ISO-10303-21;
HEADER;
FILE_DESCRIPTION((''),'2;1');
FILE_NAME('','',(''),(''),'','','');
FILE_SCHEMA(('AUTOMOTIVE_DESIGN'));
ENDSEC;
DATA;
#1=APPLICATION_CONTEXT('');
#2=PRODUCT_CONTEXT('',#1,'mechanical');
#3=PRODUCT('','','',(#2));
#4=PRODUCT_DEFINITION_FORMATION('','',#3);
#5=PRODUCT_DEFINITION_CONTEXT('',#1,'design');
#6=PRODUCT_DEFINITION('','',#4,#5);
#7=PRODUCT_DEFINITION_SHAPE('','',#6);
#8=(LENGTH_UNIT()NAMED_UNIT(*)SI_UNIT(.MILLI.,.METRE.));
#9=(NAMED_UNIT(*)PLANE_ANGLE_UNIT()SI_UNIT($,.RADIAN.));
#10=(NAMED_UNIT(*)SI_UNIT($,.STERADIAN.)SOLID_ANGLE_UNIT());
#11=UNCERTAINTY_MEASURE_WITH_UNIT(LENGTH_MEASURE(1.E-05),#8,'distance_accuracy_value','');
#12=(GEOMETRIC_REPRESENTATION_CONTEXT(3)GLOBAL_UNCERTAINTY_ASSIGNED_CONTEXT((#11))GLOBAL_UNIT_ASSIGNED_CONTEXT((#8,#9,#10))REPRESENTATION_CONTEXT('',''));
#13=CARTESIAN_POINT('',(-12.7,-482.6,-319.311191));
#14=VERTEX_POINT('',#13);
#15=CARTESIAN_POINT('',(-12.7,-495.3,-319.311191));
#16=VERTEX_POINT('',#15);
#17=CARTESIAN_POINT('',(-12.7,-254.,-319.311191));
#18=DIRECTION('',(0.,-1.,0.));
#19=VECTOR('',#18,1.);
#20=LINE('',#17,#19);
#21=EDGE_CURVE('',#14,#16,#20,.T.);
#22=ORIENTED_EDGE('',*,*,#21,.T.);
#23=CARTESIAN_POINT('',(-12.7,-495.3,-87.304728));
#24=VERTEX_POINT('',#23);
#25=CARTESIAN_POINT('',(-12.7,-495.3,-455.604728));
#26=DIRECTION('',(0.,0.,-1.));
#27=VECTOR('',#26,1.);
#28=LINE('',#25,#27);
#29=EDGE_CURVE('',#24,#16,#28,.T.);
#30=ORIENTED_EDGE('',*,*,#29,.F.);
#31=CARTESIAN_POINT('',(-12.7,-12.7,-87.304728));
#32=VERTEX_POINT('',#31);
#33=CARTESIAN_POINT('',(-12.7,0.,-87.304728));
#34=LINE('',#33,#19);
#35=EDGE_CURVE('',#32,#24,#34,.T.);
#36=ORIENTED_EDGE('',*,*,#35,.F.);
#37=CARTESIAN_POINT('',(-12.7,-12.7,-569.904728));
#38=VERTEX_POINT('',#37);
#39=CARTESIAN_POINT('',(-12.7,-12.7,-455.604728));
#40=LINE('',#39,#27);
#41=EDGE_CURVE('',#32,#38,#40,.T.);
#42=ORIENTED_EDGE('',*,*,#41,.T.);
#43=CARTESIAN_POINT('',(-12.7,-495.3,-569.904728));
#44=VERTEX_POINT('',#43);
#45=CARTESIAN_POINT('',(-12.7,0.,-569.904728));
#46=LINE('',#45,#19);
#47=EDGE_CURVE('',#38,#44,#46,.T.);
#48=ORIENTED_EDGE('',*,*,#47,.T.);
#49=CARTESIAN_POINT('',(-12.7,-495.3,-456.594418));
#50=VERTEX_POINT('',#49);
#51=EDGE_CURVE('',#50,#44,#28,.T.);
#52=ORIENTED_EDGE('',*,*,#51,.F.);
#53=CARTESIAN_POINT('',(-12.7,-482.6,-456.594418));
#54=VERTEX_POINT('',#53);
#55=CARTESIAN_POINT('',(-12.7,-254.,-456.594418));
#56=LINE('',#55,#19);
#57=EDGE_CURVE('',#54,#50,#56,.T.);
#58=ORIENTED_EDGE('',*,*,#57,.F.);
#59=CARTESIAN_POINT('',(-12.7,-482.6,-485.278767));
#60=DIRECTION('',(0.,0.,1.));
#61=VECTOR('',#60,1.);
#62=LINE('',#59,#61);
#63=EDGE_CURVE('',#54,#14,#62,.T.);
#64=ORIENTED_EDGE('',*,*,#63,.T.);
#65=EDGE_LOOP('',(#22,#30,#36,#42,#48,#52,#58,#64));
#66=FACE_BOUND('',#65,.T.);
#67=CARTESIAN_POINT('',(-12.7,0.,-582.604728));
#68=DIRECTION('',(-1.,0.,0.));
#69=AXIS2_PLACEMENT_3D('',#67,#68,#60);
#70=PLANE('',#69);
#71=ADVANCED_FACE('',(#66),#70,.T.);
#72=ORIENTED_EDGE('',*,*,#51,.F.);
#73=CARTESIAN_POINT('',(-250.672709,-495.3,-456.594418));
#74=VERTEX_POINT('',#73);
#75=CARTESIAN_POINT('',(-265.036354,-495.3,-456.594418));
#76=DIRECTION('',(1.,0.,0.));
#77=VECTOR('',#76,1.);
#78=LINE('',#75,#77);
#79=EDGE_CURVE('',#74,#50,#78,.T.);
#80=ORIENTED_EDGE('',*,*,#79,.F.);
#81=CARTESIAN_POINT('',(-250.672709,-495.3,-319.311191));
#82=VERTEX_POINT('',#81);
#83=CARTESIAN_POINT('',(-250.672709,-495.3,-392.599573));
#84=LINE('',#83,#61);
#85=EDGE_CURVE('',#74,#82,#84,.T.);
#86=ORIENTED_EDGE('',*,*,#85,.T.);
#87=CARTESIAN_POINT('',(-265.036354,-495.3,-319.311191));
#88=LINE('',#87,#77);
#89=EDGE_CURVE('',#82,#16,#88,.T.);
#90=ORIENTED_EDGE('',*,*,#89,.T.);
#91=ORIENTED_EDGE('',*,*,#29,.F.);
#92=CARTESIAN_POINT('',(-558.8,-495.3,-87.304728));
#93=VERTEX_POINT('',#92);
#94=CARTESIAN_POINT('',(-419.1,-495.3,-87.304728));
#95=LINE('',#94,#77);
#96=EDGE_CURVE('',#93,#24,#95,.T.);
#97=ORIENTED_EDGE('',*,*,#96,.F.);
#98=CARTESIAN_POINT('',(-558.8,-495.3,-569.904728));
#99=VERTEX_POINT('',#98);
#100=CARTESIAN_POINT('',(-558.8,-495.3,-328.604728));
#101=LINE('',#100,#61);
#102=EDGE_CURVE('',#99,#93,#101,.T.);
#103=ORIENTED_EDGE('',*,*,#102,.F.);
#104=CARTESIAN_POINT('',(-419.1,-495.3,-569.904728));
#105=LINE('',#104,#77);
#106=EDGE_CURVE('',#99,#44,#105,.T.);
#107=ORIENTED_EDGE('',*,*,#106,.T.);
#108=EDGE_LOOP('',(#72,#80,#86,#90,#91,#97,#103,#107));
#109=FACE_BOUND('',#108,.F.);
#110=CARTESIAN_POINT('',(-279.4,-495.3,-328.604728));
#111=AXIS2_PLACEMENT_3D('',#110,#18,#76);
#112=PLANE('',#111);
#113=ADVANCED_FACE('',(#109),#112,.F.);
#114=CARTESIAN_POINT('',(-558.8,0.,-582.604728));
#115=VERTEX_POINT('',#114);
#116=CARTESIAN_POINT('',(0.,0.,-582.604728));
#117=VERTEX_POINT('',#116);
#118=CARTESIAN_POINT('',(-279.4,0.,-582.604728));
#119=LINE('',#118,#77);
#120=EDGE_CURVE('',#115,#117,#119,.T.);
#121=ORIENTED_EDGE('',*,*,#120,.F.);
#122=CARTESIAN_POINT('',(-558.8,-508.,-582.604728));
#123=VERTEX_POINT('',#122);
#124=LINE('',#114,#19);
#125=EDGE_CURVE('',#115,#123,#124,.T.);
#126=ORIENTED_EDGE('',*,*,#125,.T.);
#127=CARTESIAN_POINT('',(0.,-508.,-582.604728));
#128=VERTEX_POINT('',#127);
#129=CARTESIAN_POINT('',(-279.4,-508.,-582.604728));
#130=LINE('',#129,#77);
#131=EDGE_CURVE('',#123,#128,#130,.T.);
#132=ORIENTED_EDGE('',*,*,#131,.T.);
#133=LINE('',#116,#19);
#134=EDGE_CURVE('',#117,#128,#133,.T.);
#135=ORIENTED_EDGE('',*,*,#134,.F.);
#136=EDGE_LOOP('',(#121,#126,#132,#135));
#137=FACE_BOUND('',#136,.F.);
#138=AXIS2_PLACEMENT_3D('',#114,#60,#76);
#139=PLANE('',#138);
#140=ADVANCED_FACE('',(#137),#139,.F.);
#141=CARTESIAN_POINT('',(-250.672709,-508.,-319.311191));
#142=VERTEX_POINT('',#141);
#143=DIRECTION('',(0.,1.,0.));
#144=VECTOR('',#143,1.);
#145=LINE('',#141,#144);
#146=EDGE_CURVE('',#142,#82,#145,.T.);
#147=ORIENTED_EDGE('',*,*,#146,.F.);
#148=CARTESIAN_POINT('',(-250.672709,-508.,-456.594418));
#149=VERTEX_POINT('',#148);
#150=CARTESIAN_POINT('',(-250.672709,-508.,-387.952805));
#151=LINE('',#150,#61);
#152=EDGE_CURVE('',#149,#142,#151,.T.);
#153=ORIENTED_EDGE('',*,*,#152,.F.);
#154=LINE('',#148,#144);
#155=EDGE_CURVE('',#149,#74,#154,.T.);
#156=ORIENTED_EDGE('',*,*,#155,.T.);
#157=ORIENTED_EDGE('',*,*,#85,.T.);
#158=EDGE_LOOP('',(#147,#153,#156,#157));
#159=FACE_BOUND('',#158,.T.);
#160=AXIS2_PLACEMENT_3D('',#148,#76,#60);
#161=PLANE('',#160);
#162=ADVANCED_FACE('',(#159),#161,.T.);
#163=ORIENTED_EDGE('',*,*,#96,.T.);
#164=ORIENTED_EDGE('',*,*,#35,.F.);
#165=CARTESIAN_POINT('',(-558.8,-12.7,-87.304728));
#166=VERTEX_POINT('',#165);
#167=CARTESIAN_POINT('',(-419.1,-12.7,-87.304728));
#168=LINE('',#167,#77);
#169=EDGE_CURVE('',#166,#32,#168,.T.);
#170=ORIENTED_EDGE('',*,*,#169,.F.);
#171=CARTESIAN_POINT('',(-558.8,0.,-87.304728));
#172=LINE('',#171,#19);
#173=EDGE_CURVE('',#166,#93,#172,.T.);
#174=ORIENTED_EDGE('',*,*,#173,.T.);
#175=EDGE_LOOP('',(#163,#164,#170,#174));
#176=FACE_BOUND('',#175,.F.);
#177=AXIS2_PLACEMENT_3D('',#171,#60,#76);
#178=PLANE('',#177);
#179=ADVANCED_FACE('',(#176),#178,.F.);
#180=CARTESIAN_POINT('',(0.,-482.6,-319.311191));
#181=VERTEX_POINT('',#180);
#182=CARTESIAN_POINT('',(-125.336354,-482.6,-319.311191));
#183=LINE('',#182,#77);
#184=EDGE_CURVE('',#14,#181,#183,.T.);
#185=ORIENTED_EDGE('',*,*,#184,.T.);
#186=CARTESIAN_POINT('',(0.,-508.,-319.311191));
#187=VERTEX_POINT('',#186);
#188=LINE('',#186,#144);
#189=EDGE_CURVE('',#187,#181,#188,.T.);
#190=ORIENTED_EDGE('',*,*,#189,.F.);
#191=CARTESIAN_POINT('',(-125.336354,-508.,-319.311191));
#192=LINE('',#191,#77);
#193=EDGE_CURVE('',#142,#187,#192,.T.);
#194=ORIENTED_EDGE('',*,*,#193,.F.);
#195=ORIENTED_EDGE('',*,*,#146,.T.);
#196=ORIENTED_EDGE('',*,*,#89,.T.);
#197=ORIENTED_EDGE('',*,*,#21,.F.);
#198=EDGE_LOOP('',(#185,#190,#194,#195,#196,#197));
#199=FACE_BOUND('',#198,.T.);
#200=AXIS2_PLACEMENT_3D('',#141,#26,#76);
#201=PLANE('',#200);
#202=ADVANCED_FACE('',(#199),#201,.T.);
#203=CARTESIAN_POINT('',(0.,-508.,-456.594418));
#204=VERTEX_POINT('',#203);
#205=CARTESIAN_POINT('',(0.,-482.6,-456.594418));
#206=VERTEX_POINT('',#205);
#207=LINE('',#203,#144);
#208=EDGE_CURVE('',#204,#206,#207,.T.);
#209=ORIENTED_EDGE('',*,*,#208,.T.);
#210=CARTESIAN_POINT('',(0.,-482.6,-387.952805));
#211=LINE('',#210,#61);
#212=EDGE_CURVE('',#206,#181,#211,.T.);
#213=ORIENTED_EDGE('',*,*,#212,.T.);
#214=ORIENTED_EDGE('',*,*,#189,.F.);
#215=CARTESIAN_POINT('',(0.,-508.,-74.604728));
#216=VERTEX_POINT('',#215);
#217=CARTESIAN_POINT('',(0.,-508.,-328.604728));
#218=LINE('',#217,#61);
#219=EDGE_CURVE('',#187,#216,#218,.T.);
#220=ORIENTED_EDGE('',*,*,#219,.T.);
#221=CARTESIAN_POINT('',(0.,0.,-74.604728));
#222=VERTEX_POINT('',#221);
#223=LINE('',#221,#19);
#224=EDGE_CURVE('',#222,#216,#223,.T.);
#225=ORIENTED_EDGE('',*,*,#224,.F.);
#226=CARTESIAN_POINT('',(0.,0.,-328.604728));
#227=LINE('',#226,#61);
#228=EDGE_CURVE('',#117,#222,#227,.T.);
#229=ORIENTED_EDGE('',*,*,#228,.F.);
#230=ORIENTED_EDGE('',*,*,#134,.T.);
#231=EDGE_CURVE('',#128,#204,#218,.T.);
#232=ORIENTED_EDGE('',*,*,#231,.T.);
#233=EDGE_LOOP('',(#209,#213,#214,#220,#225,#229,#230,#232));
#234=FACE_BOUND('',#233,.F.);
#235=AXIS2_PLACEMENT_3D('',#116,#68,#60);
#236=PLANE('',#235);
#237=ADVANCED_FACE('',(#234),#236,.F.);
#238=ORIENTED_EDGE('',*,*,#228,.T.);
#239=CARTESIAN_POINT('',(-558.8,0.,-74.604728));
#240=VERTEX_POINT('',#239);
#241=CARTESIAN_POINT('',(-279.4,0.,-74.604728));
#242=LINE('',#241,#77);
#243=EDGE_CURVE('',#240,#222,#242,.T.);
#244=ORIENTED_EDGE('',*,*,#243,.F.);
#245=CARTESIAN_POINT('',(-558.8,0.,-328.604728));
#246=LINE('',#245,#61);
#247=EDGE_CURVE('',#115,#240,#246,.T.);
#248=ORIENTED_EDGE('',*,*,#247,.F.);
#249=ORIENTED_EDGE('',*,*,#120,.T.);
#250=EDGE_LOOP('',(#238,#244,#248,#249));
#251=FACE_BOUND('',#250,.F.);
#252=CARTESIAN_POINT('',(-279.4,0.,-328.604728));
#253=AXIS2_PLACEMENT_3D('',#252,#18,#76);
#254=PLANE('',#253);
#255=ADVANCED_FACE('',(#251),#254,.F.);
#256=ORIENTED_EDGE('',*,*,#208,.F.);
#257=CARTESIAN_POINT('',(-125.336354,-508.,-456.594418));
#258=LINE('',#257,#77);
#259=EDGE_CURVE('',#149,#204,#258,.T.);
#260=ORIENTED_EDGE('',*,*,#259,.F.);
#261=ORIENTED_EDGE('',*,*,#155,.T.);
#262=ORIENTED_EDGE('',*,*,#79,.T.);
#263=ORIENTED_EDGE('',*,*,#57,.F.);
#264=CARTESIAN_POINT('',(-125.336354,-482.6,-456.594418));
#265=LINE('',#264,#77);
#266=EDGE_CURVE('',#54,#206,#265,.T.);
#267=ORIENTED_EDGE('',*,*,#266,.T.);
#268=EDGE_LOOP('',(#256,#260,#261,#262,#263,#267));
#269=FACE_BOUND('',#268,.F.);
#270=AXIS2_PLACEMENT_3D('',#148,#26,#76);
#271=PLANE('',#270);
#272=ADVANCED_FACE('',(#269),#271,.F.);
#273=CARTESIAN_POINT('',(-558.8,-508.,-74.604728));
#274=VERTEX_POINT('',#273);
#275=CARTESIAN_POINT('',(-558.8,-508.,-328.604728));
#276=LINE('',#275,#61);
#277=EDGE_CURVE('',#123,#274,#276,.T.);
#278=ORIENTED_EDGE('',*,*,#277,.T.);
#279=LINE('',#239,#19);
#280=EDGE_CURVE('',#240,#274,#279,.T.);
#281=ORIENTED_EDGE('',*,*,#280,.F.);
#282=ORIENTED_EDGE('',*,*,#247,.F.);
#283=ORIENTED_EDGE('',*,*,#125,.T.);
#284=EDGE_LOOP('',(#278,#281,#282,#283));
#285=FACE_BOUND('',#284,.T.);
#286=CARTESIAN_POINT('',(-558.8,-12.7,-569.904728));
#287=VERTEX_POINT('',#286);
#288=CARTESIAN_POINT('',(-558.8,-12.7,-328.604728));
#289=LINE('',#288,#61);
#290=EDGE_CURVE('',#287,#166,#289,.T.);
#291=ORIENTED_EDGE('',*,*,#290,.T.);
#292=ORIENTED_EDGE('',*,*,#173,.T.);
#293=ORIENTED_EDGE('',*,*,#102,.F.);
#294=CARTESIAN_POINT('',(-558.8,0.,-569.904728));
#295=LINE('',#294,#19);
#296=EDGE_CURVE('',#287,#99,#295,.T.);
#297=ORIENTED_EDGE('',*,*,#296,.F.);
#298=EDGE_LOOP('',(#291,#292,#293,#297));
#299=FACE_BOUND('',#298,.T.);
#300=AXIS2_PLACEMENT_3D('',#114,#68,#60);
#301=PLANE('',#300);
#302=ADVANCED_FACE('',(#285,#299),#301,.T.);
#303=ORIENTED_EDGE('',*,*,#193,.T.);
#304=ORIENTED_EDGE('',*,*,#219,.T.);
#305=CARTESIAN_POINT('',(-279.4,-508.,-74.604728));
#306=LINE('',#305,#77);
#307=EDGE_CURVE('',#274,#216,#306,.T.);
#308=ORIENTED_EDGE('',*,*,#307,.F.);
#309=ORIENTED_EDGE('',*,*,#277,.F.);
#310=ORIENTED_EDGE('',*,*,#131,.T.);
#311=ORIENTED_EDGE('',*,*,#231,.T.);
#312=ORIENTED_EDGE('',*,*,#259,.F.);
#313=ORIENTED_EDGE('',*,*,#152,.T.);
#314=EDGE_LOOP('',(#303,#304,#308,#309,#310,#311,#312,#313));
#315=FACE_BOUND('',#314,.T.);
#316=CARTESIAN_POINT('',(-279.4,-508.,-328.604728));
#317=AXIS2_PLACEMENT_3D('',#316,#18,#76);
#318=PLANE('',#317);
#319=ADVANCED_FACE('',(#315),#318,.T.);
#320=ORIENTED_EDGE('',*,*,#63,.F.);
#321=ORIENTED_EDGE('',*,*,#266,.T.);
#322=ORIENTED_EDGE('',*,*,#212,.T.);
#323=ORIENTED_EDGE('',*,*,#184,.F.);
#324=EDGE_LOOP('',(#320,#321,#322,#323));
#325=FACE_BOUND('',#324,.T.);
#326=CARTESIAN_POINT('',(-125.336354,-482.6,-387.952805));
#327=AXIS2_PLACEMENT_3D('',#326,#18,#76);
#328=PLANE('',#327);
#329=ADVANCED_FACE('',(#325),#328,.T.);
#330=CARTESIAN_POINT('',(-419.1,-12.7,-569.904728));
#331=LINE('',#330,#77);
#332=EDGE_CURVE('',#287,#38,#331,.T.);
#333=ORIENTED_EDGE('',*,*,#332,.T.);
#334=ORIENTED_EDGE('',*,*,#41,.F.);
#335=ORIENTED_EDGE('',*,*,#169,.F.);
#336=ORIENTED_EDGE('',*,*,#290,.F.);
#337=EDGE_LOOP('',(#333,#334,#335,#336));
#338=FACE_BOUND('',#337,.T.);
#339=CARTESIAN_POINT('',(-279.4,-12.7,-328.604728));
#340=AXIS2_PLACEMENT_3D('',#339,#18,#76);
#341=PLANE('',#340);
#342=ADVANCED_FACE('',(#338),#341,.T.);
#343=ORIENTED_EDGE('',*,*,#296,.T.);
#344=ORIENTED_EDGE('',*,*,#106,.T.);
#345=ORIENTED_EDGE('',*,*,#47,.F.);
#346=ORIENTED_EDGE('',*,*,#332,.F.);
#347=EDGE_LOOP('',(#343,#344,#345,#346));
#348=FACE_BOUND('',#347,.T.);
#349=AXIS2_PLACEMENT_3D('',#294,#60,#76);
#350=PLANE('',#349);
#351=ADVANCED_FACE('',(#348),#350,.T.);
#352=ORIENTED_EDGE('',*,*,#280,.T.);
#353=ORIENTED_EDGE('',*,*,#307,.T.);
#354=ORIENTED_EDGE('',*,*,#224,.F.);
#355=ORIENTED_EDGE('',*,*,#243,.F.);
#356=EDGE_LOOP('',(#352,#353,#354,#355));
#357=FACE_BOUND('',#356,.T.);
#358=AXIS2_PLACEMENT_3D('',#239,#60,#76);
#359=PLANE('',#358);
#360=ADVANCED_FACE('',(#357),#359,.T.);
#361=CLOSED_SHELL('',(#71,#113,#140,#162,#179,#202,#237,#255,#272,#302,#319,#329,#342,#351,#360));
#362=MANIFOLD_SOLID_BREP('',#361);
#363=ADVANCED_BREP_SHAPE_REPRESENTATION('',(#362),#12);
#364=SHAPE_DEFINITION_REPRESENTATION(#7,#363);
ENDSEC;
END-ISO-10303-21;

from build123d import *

# Parameters (mm, degrees)
F0_W     = 558.8
F0_H     = 508
F1_DEPTH = 508
F2_T     = -12.7
F5_W     = 250.6727086544
F5_H     = 137.283227253
F6_DEPTH = 25.4


# Not quite as in the source:
# - the program builds the solid bodies; features that only make, move or delete a surface that nothing else refers to are left out


with BuildPart() as f1:
    # F0 (on Front) → F1 (new body)
    with BuildSketch(Plane.XZ):
        with Locations((-279.4, -328.6047284609)):
            Rectangle(F0_W, F0_H)
    extrude(amount=F1_DEPTH)

    # F2
    f2_openings = [f1.faces().sort_by_distance(p)[0] for p in [
        (-558.8, -254, -328.604728),
    ]]
    offset(amount=F2_T, openings=f2_openings)

    # F5 (on face) → F6 (cut)
    with BuildSketch(Plane.XZ.offset(508)):
        with Locations((-125.3363543272, -387.9528045654)):
            Rectangle(F5_W, F5_H)
    extrude(amount=-F6_DEPTH, mode=Mode.SUBTRACT)


solid = f1.part
